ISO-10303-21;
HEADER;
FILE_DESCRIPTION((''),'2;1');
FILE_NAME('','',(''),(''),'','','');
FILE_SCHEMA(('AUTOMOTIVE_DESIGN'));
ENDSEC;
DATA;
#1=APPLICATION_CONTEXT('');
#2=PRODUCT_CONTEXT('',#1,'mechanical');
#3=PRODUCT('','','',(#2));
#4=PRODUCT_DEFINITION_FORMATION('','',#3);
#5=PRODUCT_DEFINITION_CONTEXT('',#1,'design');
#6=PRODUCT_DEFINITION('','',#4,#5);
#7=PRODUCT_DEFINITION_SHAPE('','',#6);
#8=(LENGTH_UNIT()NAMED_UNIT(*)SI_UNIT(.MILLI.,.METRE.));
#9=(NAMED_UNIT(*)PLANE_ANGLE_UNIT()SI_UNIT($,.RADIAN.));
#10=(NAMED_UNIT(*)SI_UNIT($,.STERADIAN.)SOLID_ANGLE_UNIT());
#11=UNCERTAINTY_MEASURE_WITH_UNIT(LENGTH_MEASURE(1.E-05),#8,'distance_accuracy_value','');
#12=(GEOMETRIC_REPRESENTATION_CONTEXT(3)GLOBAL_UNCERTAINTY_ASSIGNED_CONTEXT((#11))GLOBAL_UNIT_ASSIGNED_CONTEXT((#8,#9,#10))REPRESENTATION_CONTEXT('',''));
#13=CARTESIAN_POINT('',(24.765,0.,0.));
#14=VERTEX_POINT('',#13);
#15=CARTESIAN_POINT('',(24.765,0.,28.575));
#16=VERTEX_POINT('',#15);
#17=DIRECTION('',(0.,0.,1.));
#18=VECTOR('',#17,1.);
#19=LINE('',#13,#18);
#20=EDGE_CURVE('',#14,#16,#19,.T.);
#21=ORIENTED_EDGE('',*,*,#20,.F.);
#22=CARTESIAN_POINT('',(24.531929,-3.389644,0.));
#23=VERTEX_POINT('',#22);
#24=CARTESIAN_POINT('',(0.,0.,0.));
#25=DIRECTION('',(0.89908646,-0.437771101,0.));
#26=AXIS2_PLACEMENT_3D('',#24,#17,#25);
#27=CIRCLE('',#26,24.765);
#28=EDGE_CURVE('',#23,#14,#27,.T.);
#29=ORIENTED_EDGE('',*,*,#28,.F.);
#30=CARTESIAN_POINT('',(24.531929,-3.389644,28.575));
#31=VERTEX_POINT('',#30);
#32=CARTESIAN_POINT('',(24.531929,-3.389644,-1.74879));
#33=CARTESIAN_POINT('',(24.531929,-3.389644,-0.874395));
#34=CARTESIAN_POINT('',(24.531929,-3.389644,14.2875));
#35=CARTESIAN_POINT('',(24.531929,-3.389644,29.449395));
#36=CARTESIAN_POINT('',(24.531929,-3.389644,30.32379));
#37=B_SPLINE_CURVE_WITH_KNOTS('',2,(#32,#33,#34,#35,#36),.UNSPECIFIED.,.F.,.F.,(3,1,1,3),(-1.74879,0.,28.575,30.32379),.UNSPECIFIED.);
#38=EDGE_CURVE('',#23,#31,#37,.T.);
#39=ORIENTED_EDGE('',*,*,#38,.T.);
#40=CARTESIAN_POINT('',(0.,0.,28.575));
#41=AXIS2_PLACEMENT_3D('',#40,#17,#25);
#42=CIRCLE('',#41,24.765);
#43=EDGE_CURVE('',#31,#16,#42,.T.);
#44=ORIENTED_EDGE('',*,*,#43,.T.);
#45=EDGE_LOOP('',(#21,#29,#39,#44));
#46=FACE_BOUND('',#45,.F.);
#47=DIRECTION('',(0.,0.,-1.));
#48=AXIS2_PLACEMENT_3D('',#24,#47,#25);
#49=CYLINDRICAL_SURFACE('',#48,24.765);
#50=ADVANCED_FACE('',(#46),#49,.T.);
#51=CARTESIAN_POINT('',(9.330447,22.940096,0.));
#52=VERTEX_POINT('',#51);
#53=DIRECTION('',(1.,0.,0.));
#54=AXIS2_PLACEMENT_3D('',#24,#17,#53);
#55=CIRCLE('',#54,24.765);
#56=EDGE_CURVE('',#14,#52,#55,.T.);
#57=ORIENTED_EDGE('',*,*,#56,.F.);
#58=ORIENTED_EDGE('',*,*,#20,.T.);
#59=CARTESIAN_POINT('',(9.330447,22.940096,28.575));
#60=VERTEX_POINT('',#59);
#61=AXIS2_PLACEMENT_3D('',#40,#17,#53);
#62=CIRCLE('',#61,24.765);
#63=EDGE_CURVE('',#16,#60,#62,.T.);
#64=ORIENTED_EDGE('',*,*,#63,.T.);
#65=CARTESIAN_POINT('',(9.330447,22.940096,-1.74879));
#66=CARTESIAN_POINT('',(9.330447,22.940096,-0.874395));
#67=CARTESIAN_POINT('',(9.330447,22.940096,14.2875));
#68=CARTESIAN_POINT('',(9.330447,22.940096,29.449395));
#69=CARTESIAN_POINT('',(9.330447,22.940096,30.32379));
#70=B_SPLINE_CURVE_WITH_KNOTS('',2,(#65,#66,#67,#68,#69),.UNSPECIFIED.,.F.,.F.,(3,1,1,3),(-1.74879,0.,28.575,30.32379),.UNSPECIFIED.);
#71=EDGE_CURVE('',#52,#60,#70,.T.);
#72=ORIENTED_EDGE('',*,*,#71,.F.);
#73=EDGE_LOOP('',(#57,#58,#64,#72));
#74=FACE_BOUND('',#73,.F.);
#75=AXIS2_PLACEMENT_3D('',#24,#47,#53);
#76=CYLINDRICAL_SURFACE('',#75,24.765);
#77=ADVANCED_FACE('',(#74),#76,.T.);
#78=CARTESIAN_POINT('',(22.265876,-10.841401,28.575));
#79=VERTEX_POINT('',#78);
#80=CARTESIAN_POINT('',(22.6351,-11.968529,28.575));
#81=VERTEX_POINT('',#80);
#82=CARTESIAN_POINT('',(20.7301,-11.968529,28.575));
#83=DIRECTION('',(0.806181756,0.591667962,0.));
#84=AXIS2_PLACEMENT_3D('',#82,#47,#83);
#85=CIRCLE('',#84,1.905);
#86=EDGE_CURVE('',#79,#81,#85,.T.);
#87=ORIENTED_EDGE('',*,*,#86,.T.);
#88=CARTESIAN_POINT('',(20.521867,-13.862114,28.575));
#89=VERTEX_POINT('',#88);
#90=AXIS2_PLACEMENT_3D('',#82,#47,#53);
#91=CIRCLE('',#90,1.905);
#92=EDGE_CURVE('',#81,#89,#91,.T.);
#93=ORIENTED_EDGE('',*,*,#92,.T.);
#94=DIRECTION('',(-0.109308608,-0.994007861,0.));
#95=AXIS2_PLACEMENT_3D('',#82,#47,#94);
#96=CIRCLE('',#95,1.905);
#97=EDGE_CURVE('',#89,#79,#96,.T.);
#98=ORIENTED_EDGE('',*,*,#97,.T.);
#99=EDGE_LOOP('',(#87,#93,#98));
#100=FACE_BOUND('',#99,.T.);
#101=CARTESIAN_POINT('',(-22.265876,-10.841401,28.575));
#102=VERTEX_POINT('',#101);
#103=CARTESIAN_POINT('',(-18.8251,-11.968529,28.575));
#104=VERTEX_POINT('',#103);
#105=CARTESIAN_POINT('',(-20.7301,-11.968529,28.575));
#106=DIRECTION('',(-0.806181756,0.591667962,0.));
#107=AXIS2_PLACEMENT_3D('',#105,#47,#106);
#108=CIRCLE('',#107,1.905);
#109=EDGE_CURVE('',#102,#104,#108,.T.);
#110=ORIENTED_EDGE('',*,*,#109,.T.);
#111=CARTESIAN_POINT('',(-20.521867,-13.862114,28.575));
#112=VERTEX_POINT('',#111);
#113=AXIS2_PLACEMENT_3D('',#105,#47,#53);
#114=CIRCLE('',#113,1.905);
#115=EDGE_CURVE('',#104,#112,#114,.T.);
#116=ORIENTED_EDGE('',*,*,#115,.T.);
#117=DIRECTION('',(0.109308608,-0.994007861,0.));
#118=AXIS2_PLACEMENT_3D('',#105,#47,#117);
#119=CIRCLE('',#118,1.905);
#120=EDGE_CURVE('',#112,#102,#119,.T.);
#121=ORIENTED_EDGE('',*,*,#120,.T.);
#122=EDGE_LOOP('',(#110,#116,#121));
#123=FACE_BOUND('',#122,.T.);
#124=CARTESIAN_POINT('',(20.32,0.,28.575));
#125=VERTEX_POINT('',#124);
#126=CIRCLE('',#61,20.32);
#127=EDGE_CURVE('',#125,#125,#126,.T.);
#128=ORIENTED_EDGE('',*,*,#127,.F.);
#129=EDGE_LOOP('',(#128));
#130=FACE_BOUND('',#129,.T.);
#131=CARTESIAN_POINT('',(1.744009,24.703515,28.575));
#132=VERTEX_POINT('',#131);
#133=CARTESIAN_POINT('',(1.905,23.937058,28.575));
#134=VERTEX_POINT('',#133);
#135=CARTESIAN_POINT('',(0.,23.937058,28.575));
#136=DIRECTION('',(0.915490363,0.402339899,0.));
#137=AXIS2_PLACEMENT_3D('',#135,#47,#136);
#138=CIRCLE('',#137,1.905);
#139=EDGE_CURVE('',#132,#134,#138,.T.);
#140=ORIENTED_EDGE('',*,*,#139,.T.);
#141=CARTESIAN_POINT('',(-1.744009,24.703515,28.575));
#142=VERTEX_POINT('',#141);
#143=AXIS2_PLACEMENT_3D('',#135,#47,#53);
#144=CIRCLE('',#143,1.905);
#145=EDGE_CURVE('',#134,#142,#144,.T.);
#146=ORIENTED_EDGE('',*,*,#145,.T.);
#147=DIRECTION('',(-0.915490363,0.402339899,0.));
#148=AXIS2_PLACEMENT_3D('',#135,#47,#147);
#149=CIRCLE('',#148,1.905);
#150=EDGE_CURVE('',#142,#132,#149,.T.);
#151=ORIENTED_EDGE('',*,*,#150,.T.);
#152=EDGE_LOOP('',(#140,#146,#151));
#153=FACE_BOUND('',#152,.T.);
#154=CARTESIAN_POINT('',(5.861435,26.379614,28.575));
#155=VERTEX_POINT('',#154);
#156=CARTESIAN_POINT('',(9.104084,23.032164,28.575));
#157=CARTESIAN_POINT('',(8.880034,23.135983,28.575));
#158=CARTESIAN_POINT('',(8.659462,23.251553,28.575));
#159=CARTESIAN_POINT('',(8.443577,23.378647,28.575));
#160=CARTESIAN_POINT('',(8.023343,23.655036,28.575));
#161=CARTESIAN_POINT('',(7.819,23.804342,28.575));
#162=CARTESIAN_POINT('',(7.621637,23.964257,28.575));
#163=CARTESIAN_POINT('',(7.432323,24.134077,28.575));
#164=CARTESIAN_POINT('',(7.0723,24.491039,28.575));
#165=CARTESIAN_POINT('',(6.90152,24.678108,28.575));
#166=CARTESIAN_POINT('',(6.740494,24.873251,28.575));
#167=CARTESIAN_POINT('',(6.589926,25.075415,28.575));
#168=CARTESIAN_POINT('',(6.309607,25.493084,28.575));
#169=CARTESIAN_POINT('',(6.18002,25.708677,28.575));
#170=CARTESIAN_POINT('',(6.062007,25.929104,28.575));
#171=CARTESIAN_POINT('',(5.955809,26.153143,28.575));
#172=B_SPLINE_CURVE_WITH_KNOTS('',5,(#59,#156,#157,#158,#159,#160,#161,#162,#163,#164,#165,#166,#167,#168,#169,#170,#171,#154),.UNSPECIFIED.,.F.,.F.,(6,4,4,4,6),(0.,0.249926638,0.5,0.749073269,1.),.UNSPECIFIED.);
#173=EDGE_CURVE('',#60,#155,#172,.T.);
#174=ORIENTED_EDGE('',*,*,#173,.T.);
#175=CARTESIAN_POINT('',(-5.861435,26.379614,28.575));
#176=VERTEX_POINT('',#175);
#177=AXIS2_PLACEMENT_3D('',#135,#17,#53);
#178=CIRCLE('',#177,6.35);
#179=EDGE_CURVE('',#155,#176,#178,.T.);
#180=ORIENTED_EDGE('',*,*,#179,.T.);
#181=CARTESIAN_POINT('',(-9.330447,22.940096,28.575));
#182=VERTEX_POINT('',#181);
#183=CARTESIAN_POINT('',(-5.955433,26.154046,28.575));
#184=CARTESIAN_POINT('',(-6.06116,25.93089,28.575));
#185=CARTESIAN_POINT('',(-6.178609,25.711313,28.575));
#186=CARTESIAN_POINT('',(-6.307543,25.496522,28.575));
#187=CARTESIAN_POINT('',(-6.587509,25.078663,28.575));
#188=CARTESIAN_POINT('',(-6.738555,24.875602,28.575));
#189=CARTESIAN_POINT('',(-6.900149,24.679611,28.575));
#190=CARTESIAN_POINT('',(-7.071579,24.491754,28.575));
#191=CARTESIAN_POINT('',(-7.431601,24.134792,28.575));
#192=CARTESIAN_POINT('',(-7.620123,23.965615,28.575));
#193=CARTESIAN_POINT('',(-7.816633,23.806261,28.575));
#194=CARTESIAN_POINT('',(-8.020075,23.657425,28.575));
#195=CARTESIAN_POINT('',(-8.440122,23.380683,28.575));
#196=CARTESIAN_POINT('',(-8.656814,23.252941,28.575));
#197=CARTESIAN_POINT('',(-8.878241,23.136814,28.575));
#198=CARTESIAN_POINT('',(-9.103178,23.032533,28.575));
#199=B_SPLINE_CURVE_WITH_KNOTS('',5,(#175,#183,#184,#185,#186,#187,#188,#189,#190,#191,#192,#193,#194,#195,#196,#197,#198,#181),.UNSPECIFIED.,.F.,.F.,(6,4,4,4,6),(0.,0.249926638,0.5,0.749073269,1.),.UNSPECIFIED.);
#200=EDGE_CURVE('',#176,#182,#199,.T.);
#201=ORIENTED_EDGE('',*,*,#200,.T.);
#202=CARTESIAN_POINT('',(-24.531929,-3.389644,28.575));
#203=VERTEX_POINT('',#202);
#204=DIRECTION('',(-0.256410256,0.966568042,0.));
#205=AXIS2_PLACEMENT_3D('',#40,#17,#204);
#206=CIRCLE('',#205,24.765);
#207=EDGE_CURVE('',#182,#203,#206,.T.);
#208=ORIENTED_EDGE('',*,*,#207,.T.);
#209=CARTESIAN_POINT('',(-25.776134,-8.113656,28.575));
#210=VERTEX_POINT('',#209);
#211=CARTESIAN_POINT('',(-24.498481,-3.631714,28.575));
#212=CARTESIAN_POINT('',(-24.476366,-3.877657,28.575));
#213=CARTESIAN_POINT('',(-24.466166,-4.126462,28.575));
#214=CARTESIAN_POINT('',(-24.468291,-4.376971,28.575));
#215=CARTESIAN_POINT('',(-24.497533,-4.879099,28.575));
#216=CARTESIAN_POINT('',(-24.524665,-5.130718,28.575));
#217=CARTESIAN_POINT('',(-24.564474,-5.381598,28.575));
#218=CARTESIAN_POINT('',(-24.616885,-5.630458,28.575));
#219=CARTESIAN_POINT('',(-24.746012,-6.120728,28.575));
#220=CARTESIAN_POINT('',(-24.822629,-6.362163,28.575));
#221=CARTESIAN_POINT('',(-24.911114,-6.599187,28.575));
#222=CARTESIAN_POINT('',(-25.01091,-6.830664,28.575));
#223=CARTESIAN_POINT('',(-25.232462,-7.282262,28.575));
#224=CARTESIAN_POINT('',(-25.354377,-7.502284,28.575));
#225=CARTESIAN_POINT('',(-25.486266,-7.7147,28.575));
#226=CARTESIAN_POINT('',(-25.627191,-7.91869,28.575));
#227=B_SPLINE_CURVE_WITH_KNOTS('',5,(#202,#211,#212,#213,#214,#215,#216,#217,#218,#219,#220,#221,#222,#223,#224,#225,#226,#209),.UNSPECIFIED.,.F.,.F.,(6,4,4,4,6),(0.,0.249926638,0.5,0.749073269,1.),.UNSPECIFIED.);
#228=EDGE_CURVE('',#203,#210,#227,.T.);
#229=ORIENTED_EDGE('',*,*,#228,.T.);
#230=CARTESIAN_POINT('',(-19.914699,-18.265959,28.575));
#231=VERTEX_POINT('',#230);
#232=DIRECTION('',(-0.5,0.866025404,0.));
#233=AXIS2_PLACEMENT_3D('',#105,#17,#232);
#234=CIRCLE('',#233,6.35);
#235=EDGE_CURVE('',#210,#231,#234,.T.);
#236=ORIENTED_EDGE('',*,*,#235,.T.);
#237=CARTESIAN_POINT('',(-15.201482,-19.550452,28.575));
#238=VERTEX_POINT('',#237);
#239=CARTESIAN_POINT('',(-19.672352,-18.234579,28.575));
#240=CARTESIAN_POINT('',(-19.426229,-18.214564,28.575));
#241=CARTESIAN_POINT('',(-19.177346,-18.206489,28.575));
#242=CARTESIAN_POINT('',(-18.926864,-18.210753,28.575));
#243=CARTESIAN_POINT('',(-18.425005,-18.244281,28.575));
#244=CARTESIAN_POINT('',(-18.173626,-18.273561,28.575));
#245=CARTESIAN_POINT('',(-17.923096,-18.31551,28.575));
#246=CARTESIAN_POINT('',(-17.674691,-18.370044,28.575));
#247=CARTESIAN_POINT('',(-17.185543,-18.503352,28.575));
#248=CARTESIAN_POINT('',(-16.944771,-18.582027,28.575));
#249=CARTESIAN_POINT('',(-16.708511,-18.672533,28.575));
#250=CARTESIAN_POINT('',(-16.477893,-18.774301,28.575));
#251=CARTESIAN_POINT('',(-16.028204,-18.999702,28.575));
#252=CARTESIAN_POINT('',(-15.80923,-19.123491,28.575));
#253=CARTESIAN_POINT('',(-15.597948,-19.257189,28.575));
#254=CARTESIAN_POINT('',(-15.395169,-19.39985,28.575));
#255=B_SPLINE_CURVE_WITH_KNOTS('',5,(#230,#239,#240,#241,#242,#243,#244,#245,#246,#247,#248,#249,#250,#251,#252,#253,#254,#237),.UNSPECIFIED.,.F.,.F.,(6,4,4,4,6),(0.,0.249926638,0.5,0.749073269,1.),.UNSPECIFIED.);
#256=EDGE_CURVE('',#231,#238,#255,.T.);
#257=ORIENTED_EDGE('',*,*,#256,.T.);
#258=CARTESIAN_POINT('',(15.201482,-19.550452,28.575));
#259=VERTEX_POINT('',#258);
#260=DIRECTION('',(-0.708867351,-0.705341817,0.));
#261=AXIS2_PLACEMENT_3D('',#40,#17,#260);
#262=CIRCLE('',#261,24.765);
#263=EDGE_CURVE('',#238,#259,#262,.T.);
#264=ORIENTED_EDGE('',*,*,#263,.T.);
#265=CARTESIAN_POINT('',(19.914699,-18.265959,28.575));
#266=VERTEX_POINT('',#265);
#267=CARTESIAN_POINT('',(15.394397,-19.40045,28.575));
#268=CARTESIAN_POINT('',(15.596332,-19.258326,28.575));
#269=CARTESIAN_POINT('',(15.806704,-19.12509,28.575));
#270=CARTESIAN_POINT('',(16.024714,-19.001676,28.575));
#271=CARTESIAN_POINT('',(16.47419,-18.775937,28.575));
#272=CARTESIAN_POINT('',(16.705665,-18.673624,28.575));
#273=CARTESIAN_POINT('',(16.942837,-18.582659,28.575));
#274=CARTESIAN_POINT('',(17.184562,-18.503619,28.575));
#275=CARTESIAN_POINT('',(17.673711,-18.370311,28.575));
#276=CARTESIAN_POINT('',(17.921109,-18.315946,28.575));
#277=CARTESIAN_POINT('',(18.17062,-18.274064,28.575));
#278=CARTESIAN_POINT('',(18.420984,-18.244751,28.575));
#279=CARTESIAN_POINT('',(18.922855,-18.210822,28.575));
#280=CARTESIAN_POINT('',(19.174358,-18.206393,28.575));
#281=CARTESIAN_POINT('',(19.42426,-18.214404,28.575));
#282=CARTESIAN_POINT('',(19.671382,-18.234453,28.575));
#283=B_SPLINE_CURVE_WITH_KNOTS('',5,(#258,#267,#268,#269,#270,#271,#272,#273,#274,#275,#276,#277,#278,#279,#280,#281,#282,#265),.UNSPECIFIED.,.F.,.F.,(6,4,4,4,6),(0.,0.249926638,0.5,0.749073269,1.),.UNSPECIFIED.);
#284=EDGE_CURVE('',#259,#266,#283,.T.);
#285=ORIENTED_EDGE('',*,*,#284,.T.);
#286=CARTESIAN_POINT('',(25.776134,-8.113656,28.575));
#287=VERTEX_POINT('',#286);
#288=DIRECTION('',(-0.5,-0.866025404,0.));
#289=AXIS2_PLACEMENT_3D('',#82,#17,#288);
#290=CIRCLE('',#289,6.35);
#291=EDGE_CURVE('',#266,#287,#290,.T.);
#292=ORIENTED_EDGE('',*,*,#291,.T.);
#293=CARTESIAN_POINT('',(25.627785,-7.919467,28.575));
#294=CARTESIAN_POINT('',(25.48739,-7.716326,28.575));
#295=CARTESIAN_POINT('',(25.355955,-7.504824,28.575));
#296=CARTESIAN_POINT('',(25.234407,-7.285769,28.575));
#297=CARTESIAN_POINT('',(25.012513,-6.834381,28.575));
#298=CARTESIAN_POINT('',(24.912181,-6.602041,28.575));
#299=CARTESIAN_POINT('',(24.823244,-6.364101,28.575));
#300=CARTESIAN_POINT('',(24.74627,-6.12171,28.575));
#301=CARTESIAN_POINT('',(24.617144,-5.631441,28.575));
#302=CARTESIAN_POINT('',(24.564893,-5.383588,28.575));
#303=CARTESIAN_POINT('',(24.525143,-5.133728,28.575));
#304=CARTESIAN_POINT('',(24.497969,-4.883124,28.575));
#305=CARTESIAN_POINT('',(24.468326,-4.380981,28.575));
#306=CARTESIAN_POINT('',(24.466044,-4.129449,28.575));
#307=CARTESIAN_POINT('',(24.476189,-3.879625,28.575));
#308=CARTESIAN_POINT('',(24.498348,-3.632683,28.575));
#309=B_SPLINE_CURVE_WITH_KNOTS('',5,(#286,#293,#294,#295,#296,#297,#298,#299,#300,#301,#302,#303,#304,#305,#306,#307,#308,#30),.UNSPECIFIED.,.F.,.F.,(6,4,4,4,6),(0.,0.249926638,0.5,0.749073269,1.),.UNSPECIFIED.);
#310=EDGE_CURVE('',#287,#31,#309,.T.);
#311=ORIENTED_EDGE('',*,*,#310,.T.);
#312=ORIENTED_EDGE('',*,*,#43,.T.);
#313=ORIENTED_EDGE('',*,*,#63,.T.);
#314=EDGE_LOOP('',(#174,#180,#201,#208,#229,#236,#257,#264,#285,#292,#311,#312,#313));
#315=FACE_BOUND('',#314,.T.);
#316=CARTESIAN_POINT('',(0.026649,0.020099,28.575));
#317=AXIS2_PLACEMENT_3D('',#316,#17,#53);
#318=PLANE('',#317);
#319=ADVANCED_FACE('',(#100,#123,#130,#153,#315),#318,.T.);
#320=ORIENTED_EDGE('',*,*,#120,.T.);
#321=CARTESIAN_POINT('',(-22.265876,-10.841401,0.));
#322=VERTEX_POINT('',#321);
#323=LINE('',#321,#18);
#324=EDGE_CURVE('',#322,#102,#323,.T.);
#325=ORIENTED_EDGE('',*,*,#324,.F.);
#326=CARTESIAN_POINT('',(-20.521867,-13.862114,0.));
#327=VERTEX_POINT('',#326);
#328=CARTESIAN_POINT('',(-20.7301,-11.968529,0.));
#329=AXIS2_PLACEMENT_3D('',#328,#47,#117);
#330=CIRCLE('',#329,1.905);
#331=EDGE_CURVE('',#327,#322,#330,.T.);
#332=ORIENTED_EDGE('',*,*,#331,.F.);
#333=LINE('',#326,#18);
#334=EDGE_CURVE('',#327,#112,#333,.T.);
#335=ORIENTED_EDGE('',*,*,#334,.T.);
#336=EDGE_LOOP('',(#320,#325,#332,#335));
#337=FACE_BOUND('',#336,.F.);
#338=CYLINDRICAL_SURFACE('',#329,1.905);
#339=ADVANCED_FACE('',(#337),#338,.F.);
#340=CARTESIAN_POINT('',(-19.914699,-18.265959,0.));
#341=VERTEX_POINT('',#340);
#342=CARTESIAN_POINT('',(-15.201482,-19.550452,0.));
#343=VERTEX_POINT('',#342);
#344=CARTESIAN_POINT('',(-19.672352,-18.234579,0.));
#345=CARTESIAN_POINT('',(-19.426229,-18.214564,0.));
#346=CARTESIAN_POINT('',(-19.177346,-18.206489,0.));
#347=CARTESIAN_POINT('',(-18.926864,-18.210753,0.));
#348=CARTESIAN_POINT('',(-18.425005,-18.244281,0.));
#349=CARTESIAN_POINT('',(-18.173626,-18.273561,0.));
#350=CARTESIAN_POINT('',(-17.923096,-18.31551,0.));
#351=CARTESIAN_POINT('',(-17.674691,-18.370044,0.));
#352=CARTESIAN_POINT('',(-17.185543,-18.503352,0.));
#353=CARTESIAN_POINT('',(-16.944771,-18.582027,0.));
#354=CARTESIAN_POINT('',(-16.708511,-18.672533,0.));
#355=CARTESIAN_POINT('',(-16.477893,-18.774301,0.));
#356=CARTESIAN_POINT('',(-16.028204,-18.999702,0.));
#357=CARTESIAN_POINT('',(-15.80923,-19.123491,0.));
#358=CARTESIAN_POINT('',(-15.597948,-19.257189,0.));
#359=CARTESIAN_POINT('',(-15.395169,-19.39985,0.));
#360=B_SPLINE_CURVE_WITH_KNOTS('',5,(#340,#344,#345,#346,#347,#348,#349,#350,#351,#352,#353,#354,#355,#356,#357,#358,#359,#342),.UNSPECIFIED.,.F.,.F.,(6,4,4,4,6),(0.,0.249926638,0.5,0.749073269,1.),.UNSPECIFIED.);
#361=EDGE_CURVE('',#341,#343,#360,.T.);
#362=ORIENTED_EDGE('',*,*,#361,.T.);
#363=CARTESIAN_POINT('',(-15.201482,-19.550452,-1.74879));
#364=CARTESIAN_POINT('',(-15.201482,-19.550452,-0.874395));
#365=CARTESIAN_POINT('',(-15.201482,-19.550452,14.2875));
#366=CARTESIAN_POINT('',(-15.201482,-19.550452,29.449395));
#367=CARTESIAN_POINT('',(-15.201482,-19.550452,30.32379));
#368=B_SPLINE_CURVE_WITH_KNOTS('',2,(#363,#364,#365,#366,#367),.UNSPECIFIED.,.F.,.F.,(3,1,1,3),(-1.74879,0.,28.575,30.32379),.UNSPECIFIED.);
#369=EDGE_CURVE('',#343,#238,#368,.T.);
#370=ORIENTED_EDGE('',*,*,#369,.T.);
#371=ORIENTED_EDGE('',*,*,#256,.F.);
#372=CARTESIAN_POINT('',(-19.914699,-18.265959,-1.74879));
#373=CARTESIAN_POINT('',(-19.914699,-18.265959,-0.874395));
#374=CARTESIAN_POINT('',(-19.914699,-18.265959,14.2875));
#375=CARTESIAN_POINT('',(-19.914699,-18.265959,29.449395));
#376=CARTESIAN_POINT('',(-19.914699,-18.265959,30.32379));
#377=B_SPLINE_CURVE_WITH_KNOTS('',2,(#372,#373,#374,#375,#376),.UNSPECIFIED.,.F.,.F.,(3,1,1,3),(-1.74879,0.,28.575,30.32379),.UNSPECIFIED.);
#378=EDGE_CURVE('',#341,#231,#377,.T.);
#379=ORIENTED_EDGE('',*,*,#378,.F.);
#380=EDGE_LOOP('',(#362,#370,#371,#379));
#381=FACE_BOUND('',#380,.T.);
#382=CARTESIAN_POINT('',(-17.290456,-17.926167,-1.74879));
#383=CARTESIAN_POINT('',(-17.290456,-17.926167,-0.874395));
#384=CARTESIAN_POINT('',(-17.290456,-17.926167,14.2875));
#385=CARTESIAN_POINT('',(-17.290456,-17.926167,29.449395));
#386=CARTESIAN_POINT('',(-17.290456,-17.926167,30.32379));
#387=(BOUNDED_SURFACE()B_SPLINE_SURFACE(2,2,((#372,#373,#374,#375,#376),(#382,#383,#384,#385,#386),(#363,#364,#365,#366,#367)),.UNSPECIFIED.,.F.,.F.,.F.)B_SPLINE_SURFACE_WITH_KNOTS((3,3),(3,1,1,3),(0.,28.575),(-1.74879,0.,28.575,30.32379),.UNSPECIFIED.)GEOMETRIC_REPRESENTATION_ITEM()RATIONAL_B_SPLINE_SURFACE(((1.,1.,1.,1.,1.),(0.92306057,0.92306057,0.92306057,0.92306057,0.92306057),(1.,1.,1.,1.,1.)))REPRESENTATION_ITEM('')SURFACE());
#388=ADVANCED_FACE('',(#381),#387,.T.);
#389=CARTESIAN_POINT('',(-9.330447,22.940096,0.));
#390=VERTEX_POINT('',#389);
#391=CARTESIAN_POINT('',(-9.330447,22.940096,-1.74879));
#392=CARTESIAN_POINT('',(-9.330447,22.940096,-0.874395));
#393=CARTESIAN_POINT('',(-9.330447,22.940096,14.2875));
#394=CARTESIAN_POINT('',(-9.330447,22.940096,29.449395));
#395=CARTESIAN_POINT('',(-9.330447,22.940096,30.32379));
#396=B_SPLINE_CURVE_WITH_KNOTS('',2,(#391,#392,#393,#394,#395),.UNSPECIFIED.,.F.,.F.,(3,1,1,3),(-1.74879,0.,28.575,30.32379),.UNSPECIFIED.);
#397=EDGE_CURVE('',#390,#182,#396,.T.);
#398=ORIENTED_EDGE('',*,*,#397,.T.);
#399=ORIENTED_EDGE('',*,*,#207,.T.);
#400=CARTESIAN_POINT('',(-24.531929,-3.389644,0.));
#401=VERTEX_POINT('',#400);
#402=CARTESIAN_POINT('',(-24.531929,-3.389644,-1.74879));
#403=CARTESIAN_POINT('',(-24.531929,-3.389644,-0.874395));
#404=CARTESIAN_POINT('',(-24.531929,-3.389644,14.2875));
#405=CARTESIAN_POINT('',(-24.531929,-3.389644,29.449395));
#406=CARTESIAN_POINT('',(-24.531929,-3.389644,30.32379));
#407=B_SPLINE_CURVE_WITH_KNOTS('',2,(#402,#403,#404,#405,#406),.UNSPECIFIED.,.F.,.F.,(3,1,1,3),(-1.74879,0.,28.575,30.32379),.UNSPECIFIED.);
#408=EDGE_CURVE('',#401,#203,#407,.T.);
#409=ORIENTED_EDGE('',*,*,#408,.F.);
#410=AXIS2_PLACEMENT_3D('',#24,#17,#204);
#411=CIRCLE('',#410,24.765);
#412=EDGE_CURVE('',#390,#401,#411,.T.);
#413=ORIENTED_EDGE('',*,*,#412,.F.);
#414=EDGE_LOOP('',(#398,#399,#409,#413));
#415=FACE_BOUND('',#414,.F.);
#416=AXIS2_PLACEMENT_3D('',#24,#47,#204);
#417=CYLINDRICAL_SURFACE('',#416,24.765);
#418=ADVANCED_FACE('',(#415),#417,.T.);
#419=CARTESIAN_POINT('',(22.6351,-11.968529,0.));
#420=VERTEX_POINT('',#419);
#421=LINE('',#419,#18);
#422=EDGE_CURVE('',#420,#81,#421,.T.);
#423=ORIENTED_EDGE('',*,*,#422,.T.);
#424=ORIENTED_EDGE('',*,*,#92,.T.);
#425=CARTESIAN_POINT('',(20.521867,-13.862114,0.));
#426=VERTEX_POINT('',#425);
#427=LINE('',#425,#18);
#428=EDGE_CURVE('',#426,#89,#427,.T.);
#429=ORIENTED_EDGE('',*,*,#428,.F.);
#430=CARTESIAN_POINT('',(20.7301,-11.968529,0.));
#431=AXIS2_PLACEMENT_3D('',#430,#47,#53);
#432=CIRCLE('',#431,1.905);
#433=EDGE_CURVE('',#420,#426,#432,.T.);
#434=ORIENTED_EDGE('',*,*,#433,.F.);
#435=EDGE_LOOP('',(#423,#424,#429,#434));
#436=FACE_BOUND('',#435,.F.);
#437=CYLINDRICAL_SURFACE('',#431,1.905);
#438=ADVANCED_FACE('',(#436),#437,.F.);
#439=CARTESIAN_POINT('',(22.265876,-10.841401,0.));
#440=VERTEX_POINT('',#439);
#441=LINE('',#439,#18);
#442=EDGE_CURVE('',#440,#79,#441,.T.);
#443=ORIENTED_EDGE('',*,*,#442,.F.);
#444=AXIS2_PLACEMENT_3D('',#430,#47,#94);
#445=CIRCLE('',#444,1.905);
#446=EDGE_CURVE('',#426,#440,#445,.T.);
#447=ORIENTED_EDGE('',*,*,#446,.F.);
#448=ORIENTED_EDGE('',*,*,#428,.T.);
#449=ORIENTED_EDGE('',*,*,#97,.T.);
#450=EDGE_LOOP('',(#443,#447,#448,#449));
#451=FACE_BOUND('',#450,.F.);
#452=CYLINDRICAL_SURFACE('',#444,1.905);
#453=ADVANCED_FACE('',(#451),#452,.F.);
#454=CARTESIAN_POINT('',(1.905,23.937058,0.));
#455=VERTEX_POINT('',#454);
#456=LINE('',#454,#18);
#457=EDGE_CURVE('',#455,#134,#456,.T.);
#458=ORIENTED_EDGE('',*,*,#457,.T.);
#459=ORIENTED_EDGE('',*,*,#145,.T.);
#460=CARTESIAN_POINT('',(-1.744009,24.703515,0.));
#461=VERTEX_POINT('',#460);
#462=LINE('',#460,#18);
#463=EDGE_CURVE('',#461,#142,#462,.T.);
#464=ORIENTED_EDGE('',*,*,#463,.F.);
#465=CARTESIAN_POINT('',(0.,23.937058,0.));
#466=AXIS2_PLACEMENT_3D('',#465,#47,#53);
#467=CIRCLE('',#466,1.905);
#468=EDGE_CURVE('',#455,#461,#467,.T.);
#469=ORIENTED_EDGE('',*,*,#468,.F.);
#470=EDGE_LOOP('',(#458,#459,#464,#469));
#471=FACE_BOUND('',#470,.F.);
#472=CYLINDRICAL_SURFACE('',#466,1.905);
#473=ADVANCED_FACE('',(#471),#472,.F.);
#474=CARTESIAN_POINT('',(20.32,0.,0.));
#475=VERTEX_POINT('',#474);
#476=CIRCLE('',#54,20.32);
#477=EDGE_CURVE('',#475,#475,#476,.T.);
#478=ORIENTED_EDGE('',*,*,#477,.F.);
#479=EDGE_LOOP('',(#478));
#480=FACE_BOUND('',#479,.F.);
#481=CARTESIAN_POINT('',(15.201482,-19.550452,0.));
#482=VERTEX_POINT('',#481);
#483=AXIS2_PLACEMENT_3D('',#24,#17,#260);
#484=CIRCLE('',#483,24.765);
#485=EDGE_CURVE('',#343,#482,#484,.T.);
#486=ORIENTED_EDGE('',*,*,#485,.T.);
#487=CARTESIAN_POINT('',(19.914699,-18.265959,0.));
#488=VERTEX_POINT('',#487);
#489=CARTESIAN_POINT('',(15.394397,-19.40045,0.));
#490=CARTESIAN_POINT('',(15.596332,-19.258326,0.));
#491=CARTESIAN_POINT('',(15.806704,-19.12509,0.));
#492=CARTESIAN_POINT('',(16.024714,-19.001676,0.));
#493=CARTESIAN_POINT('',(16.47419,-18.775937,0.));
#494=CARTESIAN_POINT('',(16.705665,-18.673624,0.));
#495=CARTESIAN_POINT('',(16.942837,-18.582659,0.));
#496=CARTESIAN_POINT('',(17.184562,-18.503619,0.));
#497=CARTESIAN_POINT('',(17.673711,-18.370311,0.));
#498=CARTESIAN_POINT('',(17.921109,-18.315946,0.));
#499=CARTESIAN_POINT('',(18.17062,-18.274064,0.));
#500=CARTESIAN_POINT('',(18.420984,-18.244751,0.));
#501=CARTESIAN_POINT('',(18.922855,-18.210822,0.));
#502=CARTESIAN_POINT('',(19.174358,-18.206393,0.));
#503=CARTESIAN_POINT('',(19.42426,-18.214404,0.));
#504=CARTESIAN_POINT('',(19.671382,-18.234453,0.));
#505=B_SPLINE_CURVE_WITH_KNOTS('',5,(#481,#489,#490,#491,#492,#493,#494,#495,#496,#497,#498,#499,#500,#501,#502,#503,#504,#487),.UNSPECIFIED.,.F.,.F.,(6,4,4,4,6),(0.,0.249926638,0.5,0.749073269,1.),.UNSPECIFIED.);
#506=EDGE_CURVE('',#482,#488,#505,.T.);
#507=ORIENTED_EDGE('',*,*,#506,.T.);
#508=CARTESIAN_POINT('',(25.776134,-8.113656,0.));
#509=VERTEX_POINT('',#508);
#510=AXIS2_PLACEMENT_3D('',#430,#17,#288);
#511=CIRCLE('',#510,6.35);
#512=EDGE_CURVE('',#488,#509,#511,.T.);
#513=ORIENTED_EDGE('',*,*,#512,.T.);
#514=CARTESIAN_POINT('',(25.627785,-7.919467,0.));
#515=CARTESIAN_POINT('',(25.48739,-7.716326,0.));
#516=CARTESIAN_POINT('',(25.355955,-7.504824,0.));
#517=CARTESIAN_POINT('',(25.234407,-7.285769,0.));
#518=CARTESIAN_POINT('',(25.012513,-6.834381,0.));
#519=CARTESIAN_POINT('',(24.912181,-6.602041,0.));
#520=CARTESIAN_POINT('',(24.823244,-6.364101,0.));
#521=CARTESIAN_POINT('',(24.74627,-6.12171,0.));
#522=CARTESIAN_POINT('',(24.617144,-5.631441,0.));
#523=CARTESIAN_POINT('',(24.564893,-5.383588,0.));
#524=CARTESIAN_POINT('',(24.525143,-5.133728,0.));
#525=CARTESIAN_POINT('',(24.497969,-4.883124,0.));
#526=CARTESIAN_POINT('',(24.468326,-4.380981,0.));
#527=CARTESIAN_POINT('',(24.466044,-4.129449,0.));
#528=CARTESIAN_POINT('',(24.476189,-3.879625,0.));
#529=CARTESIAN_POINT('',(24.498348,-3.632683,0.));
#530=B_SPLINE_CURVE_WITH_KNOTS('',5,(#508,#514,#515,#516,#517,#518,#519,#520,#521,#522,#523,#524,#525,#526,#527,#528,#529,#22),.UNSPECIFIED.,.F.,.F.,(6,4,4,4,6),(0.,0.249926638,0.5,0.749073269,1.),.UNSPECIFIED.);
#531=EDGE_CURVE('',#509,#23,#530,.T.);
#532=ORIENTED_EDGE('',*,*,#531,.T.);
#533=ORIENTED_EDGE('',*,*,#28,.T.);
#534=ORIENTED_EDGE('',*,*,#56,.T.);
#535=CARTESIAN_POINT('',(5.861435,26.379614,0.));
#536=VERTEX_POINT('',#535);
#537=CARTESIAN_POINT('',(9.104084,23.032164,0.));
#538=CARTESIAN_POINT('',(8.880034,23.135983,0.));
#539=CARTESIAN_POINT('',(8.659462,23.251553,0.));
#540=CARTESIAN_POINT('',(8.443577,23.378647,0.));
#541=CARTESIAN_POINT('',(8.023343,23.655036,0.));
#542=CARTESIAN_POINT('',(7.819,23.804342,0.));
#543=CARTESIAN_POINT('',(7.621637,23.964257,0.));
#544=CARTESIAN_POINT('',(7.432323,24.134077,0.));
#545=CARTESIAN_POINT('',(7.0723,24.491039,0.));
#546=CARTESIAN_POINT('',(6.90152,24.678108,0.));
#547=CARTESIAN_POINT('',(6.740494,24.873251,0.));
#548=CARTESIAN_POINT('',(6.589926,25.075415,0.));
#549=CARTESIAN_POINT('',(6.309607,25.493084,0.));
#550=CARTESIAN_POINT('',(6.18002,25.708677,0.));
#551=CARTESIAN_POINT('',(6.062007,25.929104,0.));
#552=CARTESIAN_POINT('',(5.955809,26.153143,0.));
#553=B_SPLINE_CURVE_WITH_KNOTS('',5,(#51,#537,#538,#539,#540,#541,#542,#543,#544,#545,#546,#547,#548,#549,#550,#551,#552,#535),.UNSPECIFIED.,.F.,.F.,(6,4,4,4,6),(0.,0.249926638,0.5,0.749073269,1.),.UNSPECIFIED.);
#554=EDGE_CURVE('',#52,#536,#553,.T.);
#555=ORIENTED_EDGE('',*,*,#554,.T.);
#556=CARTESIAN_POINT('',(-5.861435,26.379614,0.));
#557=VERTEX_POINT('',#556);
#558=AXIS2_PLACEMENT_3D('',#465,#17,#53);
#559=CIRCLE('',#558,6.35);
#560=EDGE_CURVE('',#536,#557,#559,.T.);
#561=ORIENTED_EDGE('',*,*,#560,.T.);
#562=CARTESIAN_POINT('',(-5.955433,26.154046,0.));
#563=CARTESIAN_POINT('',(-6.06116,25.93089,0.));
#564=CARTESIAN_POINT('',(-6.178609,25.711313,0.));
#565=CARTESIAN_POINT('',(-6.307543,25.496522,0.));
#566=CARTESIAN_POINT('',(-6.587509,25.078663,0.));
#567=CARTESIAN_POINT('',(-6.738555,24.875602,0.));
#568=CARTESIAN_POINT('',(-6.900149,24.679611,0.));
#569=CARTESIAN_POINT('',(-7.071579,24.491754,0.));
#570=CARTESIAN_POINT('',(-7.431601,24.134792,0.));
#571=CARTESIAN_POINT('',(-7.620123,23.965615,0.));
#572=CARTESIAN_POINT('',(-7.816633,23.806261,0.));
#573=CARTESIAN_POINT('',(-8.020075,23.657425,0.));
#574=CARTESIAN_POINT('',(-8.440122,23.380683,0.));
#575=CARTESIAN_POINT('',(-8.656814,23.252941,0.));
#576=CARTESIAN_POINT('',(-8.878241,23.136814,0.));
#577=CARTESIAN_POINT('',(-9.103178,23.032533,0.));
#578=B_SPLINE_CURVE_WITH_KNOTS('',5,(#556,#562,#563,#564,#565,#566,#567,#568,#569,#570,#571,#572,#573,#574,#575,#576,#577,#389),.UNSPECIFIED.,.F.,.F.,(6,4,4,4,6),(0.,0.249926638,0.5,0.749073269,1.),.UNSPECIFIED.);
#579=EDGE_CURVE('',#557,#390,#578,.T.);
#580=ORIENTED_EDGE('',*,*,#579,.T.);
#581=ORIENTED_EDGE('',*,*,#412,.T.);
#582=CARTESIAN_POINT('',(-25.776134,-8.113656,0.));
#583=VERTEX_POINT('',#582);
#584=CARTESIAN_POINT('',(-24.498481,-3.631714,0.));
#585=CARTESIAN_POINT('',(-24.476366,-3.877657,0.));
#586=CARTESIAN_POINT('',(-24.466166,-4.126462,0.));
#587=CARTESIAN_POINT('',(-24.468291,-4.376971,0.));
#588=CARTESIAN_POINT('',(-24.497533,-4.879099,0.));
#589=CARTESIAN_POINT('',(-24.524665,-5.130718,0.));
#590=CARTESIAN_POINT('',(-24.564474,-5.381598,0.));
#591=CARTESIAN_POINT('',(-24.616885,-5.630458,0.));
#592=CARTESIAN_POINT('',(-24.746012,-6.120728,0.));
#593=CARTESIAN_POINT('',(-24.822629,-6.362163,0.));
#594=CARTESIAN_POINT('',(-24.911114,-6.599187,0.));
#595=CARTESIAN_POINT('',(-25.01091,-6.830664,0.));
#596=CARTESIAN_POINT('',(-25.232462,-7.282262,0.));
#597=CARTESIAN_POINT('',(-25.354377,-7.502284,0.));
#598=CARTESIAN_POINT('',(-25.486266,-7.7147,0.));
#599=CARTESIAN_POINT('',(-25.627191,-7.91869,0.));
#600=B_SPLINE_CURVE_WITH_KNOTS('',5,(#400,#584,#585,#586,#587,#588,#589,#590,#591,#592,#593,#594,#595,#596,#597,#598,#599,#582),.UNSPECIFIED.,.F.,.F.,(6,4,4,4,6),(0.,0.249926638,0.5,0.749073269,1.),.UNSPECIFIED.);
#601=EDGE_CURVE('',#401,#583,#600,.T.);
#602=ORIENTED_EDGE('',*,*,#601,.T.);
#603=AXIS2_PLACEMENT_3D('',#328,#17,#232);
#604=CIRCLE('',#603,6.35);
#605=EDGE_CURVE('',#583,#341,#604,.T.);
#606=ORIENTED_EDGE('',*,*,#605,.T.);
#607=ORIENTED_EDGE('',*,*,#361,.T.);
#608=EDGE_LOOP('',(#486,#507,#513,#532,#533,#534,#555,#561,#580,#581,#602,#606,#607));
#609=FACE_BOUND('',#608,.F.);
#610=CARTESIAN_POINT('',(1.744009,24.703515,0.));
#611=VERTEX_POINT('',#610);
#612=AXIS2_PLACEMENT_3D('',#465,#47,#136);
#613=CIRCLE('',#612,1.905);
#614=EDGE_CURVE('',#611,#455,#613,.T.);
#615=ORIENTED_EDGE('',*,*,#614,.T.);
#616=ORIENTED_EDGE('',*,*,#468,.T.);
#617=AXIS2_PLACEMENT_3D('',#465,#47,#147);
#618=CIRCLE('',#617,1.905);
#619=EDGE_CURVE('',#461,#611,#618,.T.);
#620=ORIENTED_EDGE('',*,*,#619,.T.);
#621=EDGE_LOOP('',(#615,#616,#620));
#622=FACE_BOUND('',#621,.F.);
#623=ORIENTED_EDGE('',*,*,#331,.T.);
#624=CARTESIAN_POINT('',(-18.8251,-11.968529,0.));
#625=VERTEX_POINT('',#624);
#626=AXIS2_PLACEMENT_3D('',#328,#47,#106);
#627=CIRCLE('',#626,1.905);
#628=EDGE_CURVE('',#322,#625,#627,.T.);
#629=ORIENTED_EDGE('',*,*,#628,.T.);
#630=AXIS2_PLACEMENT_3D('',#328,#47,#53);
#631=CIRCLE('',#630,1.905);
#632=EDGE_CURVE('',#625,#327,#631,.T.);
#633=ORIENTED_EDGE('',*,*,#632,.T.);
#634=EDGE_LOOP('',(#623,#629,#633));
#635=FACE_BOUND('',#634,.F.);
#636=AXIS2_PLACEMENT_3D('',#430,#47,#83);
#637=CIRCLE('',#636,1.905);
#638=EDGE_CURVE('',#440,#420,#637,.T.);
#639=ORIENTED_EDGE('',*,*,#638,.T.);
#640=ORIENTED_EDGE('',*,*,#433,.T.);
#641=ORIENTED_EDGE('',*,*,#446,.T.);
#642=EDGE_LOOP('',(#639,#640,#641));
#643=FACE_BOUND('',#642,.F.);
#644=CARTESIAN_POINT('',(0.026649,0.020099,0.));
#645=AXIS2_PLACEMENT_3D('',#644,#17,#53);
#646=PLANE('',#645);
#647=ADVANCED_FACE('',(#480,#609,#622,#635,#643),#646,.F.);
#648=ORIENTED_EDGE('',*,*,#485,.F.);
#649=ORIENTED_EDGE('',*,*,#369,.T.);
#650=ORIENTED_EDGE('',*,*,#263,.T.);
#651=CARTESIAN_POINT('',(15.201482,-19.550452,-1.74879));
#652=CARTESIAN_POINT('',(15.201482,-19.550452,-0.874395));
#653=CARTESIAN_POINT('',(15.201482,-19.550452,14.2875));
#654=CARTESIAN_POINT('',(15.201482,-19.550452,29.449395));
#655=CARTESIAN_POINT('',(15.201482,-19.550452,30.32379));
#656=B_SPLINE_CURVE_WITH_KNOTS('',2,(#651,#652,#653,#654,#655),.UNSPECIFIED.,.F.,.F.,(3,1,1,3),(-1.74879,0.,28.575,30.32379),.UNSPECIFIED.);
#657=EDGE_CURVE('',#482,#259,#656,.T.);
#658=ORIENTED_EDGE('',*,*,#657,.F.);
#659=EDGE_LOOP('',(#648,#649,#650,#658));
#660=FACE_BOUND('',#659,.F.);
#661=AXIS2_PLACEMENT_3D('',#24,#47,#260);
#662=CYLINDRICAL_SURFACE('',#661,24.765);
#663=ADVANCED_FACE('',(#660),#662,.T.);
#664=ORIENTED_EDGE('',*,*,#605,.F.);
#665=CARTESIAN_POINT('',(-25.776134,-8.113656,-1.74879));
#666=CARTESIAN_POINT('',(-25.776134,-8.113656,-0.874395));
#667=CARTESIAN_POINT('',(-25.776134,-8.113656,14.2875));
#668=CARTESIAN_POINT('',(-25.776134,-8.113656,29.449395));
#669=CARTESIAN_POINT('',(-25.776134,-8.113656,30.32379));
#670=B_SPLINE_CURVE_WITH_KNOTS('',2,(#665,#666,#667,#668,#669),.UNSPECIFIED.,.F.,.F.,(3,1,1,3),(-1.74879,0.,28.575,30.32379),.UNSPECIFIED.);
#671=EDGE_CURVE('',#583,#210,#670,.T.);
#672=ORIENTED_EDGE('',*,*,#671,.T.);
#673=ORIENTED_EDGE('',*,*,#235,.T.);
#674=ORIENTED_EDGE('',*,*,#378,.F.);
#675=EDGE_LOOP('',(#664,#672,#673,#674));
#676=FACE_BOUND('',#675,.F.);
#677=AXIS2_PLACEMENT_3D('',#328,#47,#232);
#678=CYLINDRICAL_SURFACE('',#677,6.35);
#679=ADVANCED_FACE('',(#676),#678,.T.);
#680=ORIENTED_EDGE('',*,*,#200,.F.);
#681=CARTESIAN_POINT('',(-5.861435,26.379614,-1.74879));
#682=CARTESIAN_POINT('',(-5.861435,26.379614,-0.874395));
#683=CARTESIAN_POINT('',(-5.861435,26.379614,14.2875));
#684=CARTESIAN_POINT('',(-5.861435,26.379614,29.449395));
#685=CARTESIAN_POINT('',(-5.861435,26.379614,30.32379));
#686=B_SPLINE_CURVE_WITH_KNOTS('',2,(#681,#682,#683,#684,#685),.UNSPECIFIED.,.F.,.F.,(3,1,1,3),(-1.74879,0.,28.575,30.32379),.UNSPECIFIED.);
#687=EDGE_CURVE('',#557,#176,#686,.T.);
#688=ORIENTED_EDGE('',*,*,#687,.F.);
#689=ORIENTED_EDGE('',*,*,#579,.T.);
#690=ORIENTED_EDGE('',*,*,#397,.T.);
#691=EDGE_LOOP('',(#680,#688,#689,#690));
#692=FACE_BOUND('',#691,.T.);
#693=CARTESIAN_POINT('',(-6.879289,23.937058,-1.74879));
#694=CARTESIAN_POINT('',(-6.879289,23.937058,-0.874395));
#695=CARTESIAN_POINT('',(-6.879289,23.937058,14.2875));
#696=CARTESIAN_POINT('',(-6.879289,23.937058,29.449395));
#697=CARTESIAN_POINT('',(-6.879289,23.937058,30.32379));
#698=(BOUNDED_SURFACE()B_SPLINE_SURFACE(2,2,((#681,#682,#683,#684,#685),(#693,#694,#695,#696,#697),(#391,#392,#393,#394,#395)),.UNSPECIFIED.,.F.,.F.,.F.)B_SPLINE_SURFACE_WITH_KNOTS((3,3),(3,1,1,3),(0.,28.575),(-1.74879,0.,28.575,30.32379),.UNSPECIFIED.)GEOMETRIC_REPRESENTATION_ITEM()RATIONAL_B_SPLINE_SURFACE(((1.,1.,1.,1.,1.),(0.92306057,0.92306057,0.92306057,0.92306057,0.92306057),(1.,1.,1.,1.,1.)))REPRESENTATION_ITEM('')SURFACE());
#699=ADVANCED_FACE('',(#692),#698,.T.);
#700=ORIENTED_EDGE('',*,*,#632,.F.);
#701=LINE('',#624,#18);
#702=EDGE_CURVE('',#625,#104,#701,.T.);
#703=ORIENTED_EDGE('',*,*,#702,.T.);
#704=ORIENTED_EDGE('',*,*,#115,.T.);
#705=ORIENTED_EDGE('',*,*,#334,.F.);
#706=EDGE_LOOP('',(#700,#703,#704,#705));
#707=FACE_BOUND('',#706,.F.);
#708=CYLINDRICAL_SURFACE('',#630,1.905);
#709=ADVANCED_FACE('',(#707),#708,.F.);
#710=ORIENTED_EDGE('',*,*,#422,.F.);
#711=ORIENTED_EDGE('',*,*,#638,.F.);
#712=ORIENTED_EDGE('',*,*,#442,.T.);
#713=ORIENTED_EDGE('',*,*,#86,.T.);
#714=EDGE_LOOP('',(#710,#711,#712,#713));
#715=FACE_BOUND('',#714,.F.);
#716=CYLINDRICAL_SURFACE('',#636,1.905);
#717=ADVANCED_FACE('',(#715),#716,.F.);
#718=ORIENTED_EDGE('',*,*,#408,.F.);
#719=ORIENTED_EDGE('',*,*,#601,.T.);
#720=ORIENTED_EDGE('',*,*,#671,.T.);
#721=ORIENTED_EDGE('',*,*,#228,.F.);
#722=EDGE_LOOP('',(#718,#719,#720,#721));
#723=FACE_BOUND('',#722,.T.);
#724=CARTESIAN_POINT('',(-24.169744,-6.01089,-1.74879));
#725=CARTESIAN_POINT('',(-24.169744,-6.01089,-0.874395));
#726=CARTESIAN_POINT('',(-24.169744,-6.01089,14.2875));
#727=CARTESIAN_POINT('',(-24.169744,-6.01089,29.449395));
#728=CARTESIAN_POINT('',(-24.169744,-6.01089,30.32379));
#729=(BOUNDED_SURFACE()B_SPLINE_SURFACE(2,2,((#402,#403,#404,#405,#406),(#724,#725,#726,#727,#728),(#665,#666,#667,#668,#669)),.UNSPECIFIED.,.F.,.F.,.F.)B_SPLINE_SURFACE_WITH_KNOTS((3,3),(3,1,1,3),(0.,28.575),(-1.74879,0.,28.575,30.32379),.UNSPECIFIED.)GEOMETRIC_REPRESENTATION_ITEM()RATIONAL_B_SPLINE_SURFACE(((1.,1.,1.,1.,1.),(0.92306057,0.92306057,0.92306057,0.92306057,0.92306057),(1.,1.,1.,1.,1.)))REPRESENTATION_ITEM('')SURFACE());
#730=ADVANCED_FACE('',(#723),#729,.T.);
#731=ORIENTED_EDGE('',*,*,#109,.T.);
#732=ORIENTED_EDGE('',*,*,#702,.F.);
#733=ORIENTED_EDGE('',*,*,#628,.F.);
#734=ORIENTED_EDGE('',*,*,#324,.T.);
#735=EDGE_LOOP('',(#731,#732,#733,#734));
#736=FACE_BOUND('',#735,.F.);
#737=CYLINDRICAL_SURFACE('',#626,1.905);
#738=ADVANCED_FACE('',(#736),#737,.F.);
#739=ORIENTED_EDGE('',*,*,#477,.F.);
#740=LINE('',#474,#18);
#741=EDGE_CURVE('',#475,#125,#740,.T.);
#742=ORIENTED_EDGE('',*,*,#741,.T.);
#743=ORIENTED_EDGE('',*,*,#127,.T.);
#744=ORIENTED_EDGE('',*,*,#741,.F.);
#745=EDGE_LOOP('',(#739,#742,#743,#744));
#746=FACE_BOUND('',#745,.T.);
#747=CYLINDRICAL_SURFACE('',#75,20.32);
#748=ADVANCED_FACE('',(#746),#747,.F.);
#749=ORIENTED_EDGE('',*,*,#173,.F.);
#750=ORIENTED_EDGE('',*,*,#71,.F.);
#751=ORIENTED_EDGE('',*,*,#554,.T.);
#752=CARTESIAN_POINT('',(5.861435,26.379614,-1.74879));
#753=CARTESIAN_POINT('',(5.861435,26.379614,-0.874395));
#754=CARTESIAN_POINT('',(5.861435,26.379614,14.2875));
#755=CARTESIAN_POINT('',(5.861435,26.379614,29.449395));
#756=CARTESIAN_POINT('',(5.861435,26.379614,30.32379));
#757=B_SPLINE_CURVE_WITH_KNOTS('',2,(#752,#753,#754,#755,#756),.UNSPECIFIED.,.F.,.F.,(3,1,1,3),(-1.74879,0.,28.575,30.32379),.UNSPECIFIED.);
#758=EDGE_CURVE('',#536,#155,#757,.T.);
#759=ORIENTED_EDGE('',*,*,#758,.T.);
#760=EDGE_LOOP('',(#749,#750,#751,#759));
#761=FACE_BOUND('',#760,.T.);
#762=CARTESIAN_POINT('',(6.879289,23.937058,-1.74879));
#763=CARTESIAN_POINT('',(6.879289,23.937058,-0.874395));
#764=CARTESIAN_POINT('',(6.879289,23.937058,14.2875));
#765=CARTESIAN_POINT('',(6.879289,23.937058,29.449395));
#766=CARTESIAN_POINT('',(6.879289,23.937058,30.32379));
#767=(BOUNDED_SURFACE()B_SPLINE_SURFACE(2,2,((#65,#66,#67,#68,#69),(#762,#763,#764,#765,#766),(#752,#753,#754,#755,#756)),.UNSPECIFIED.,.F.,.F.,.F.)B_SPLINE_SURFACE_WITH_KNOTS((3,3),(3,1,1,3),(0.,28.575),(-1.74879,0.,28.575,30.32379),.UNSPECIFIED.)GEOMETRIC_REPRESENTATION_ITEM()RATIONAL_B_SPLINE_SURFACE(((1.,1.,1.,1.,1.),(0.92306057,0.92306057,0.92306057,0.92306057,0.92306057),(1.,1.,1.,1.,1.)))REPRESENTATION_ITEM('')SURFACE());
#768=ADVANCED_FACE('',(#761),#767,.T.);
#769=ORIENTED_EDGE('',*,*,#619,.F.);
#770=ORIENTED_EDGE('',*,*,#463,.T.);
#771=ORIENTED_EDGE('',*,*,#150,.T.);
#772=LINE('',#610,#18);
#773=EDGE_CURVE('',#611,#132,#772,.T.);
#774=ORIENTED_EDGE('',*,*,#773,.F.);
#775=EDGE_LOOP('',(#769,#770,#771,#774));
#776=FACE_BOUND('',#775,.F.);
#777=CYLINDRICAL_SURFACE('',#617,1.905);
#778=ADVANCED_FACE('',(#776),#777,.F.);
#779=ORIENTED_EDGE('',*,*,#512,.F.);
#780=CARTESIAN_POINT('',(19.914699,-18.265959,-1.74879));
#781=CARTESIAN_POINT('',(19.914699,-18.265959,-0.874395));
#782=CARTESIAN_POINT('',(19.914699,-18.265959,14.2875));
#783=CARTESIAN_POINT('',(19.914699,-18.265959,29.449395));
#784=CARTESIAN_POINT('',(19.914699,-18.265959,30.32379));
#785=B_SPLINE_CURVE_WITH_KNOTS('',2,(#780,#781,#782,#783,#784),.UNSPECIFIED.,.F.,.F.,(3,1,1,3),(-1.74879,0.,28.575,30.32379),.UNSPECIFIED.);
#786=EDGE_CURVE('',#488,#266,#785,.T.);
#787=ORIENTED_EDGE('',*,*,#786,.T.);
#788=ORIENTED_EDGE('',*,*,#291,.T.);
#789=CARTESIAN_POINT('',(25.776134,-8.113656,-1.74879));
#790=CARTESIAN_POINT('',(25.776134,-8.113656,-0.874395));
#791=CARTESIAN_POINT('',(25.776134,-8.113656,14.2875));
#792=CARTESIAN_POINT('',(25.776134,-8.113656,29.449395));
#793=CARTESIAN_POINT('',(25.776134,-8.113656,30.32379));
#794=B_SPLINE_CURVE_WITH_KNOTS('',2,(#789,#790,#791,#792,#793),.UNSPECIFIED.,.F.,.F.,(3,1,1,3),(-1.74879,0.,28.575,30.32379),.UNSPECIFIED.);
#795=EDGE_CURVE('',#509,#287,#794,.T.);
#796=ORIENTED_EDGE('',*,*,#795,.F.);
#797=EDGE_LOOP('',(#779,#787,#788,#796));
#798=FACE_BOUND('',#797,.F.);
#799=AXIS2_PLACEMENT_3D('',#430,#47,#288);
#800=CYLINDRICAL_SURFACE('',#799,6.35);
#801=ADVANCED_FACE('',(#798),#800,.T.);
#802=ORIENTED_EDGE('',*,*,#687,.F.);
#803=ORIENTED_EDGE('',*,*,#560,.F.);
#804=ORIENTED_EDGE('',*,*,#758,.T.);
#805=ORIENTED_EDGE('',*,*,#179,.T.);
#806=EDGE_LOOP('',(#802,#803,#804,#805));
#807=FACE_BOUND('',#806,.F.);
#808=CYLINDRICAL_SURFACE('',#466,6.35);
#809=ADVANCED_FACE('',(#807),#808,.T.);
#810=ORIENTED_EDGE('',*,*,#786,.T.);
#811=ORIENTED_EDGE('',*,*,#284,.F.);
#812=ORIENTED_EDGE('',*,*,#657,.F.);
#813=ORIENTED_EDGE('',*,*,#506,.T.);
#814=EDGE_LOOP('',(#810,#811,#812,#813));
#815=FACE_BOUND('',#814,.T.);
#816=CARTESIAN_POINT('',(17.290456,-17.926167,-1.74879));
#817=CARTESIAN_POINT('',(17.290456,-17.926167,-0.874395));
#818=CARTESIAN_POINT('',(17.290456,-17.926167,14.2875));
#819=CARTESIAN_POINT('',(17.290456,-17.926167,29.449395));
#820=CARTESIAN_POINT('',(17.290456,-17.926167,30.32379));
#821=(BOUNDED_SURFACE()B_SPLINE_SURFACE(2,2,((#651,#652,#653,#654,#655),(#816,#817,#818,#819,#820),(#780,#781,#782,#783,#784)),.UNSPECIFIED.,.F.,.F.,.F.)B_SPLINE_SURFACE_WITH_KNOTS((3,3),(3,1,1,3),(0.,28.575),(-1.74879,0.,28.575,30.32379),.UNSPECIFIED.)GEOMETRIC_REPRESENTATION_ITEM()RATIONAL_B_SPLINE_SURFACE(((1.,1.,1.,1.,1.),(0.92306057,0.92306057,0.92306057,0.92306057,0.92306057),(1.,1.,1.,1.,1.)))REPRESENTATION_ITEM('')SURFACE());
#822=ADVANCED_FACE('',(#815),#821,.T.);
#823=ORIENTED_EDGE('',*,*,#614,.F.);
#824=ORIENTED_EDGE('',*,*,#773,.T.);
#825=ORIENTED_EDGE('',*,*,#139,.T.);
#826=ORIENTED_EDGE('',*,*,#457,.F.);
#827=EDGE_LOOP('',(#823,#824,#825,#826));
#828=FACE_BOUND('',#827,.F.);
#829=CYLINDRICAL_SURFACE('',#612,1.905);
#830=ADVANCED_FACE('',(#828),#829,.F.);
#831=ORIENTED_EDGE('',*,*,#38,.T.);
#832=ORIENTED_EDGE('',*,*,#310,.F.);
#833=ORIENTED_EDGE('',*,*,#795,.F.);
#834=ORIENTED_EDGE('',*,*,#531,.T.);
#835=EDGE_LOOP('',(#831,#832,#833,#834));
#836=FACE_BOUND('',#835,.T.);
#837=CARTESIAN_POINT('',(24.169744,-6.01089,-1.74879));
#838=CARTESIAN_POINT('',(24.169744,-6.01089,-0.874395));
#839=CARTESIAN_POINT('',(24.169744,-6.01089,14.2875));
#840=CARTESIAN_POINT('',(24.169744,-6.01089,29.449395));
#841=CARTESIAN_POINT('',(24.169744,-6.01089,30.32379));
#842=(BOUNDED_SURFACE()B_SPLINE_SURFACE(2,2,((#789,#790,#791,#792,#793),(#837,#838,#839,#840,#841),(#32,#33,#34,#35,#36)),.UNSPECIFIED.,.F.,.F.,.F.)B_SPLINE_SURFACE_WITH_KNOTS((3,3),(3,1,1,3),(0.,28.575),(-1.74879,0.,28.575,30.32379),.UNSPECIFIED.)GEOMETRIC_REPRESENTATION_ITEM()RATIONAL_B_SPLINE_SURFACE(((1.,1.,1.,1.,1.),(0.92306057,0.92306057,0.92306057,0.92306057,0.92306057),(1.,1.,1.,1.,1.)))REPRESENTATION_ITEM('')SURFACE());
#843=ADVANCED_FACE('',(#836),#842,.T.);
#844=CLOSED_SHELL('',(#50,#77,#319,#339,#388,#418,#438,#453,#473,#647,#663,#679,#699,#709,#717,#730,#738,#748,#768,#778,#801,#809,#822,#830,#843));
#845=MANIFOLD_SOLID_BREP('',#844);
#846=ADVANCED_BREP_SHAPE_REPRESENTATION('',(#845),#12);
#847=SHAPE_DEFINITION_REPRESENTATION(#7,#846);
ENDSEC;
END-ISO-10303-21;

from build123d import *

# Parameters (mm, degrees)
F0_R     = 20.32
F1_DEPTH = 28.575
F2_R     = 6.35


with BuildPart() as f1:
    # F0 (on Top) → F1 (new body)
    with BuildSketch(Plane.XY):
        with BuildLine():
            ThreePointArc((23.9050999455, -6.4692674698), (24.5490837421, -3.2630832697), (24.765, 0))
            ThreePointArc((24.765, 0), (19.6285885254, 15.1004548773), (6.35, 23.9370575677))
            ThreePointArc((6.35, 23.9370575677), (4.0651088886, 24.4290833787), (1.7440091422, 24.703515076))
            ThreePointArc((1.7440091422, 24.703515076), (1.8643178935, 24.3286489263), (1.905, 23.9370575677))
            ThreePointArc((1.905, 23.9370575677), (-0.3915913586, 22.0727396742), (-1.7440091422, 24.703515076))
            ThreePointArc((-1.7440091422, 24.703515076), (-4.0651088886, 24.4290833787), (-6.35, 23.9370575677))
            ThreePointArc((-6.35, 23.9370575677), (-21.4471191247, 12.3825), (-23.9050999455, -6.4692674698))
            ThreePointArc((-23.9050999455, -6.4692674698), (-23.1887612414, -8.6940541227), (-22.2658761897, -10.8414013165))
            ThreePointArc((-22.2658761897, -10.8414013165), (-20.1370690632, -10.1581864481), (-18.8250999455, -11.9685287839))
            ThreePointArc((-18.8250999455, -11.9685287839), (-19.3113489683, -13.239815795), (-20.5218670475, -13.8621137596))
            ThreePointArc((-20.5218670475, -13.8621137596), (-19.1236523528, -15.735029256), (-17.5550999455, -17.4677900979))
            ThreePointArc((-17.5550999455, -17.4677900979), (0, -24.765), (17.5550999455, -17.4677900979))
            ThreePointArc((17.5550999455, -17.4677900979), (19.1236523528, -15.735029256), (20.5218670475, -13.8621137596))
            ThreePointArc((20.5218670475, -13.8621137596), (19.0803215513, -11.0160287839), (22.2658761897, -10.8414013165))
            ThreePointArc((22.2658761897, -10.8414013165), (23.1887612414, -8.6940541227), (23.9050999455, -6.4692674698))
        make_face()
        Circle(F0_R, mode=Mode.SUBTRACT)
        with BuildLine():
            ThreePointArc((-22.2658761897, -10.8414013165), (-23.1887612414, -8.6940541227), (-23.9050999455, -6.4692674698))
            ThreePointArc((-23.9050999455, -6.4692674698), (-26.2293612595, -15.1435287839), (-17.5550999455, -17.4677900979))
            ThreePointArc((-17.5550999455, -17.4677900979), (-19.1236523528, -15.735029256), (-20.5218670475, -13.8621137596))
            ThreePointArc((-20.5218670475, -13.8621137596), (-22.3798783397, -12.9210287839), (-22.2658761897, -10.8414013165))
        make_face()
        with BuildLine():
            ThreePointArc((1.7440091422, 24.703515076), (4.0651088886, 24.4290833787), (6.35, 23.9370575677))
            ThreePointArc((6.35, 23.9370575677), (0, 30.2870575677), (-6.35, 23.9370575677))
            ThreePointArc((-6.35, 23.9370575677), (-4.0651088886, 24.4290833787), (-1.7440091422, 24.703515076))
            ThreePointArc((-1.7440091422, 24.703515076), (0, 25.8420575677), (1.7440091422, 24.703515076))
        make_face()
        with BuildLine():
            ThreePointArc((17.5550999455, -17.4677900979), (26.2293612595, -15.1435287839), (23.9050999455, -6.4692674698))
            ThreePointArc((23.9050999455, -6.4692674698), (23.1887612414, -8.6940541227), (22.2658761897, -10.8414013165))
            ThreePointArc((22.2658761897, -10.8414013165), (22.5404422812, -11.3754979015), (22.6350999455, -11.9685287839))
            ThreePointArc((22.6350999455, -11.9685287839), (22.0013869566, -13.3872797611), (20.5218670475, -13.8621137596))
            ThreePointArc((20.5218670475, -13.8621137596), (19.1236523528, -15.735029256), (17.5550999455, -17.4677900979))
        make_face()
    extrude(amount=F1_DEPTH)

    # F2
    f2_edges = [f1.edges().sort_by_distance(p)[0] for p in [
        (6.35, 23.937058, 14.2875),
        (-23.9051, -6.469267, 14.2875),
        (17.5551, -17.46779, 14.2875),
        (23.9051, -6.469267, 14.2875),
        (-6.35, 23.937058, 14.2875),
        (-17.5551, -17.46779, 14.2875),
    ]]
    fillet(f2_edges, radius=F2_R)


solid = f1.part
